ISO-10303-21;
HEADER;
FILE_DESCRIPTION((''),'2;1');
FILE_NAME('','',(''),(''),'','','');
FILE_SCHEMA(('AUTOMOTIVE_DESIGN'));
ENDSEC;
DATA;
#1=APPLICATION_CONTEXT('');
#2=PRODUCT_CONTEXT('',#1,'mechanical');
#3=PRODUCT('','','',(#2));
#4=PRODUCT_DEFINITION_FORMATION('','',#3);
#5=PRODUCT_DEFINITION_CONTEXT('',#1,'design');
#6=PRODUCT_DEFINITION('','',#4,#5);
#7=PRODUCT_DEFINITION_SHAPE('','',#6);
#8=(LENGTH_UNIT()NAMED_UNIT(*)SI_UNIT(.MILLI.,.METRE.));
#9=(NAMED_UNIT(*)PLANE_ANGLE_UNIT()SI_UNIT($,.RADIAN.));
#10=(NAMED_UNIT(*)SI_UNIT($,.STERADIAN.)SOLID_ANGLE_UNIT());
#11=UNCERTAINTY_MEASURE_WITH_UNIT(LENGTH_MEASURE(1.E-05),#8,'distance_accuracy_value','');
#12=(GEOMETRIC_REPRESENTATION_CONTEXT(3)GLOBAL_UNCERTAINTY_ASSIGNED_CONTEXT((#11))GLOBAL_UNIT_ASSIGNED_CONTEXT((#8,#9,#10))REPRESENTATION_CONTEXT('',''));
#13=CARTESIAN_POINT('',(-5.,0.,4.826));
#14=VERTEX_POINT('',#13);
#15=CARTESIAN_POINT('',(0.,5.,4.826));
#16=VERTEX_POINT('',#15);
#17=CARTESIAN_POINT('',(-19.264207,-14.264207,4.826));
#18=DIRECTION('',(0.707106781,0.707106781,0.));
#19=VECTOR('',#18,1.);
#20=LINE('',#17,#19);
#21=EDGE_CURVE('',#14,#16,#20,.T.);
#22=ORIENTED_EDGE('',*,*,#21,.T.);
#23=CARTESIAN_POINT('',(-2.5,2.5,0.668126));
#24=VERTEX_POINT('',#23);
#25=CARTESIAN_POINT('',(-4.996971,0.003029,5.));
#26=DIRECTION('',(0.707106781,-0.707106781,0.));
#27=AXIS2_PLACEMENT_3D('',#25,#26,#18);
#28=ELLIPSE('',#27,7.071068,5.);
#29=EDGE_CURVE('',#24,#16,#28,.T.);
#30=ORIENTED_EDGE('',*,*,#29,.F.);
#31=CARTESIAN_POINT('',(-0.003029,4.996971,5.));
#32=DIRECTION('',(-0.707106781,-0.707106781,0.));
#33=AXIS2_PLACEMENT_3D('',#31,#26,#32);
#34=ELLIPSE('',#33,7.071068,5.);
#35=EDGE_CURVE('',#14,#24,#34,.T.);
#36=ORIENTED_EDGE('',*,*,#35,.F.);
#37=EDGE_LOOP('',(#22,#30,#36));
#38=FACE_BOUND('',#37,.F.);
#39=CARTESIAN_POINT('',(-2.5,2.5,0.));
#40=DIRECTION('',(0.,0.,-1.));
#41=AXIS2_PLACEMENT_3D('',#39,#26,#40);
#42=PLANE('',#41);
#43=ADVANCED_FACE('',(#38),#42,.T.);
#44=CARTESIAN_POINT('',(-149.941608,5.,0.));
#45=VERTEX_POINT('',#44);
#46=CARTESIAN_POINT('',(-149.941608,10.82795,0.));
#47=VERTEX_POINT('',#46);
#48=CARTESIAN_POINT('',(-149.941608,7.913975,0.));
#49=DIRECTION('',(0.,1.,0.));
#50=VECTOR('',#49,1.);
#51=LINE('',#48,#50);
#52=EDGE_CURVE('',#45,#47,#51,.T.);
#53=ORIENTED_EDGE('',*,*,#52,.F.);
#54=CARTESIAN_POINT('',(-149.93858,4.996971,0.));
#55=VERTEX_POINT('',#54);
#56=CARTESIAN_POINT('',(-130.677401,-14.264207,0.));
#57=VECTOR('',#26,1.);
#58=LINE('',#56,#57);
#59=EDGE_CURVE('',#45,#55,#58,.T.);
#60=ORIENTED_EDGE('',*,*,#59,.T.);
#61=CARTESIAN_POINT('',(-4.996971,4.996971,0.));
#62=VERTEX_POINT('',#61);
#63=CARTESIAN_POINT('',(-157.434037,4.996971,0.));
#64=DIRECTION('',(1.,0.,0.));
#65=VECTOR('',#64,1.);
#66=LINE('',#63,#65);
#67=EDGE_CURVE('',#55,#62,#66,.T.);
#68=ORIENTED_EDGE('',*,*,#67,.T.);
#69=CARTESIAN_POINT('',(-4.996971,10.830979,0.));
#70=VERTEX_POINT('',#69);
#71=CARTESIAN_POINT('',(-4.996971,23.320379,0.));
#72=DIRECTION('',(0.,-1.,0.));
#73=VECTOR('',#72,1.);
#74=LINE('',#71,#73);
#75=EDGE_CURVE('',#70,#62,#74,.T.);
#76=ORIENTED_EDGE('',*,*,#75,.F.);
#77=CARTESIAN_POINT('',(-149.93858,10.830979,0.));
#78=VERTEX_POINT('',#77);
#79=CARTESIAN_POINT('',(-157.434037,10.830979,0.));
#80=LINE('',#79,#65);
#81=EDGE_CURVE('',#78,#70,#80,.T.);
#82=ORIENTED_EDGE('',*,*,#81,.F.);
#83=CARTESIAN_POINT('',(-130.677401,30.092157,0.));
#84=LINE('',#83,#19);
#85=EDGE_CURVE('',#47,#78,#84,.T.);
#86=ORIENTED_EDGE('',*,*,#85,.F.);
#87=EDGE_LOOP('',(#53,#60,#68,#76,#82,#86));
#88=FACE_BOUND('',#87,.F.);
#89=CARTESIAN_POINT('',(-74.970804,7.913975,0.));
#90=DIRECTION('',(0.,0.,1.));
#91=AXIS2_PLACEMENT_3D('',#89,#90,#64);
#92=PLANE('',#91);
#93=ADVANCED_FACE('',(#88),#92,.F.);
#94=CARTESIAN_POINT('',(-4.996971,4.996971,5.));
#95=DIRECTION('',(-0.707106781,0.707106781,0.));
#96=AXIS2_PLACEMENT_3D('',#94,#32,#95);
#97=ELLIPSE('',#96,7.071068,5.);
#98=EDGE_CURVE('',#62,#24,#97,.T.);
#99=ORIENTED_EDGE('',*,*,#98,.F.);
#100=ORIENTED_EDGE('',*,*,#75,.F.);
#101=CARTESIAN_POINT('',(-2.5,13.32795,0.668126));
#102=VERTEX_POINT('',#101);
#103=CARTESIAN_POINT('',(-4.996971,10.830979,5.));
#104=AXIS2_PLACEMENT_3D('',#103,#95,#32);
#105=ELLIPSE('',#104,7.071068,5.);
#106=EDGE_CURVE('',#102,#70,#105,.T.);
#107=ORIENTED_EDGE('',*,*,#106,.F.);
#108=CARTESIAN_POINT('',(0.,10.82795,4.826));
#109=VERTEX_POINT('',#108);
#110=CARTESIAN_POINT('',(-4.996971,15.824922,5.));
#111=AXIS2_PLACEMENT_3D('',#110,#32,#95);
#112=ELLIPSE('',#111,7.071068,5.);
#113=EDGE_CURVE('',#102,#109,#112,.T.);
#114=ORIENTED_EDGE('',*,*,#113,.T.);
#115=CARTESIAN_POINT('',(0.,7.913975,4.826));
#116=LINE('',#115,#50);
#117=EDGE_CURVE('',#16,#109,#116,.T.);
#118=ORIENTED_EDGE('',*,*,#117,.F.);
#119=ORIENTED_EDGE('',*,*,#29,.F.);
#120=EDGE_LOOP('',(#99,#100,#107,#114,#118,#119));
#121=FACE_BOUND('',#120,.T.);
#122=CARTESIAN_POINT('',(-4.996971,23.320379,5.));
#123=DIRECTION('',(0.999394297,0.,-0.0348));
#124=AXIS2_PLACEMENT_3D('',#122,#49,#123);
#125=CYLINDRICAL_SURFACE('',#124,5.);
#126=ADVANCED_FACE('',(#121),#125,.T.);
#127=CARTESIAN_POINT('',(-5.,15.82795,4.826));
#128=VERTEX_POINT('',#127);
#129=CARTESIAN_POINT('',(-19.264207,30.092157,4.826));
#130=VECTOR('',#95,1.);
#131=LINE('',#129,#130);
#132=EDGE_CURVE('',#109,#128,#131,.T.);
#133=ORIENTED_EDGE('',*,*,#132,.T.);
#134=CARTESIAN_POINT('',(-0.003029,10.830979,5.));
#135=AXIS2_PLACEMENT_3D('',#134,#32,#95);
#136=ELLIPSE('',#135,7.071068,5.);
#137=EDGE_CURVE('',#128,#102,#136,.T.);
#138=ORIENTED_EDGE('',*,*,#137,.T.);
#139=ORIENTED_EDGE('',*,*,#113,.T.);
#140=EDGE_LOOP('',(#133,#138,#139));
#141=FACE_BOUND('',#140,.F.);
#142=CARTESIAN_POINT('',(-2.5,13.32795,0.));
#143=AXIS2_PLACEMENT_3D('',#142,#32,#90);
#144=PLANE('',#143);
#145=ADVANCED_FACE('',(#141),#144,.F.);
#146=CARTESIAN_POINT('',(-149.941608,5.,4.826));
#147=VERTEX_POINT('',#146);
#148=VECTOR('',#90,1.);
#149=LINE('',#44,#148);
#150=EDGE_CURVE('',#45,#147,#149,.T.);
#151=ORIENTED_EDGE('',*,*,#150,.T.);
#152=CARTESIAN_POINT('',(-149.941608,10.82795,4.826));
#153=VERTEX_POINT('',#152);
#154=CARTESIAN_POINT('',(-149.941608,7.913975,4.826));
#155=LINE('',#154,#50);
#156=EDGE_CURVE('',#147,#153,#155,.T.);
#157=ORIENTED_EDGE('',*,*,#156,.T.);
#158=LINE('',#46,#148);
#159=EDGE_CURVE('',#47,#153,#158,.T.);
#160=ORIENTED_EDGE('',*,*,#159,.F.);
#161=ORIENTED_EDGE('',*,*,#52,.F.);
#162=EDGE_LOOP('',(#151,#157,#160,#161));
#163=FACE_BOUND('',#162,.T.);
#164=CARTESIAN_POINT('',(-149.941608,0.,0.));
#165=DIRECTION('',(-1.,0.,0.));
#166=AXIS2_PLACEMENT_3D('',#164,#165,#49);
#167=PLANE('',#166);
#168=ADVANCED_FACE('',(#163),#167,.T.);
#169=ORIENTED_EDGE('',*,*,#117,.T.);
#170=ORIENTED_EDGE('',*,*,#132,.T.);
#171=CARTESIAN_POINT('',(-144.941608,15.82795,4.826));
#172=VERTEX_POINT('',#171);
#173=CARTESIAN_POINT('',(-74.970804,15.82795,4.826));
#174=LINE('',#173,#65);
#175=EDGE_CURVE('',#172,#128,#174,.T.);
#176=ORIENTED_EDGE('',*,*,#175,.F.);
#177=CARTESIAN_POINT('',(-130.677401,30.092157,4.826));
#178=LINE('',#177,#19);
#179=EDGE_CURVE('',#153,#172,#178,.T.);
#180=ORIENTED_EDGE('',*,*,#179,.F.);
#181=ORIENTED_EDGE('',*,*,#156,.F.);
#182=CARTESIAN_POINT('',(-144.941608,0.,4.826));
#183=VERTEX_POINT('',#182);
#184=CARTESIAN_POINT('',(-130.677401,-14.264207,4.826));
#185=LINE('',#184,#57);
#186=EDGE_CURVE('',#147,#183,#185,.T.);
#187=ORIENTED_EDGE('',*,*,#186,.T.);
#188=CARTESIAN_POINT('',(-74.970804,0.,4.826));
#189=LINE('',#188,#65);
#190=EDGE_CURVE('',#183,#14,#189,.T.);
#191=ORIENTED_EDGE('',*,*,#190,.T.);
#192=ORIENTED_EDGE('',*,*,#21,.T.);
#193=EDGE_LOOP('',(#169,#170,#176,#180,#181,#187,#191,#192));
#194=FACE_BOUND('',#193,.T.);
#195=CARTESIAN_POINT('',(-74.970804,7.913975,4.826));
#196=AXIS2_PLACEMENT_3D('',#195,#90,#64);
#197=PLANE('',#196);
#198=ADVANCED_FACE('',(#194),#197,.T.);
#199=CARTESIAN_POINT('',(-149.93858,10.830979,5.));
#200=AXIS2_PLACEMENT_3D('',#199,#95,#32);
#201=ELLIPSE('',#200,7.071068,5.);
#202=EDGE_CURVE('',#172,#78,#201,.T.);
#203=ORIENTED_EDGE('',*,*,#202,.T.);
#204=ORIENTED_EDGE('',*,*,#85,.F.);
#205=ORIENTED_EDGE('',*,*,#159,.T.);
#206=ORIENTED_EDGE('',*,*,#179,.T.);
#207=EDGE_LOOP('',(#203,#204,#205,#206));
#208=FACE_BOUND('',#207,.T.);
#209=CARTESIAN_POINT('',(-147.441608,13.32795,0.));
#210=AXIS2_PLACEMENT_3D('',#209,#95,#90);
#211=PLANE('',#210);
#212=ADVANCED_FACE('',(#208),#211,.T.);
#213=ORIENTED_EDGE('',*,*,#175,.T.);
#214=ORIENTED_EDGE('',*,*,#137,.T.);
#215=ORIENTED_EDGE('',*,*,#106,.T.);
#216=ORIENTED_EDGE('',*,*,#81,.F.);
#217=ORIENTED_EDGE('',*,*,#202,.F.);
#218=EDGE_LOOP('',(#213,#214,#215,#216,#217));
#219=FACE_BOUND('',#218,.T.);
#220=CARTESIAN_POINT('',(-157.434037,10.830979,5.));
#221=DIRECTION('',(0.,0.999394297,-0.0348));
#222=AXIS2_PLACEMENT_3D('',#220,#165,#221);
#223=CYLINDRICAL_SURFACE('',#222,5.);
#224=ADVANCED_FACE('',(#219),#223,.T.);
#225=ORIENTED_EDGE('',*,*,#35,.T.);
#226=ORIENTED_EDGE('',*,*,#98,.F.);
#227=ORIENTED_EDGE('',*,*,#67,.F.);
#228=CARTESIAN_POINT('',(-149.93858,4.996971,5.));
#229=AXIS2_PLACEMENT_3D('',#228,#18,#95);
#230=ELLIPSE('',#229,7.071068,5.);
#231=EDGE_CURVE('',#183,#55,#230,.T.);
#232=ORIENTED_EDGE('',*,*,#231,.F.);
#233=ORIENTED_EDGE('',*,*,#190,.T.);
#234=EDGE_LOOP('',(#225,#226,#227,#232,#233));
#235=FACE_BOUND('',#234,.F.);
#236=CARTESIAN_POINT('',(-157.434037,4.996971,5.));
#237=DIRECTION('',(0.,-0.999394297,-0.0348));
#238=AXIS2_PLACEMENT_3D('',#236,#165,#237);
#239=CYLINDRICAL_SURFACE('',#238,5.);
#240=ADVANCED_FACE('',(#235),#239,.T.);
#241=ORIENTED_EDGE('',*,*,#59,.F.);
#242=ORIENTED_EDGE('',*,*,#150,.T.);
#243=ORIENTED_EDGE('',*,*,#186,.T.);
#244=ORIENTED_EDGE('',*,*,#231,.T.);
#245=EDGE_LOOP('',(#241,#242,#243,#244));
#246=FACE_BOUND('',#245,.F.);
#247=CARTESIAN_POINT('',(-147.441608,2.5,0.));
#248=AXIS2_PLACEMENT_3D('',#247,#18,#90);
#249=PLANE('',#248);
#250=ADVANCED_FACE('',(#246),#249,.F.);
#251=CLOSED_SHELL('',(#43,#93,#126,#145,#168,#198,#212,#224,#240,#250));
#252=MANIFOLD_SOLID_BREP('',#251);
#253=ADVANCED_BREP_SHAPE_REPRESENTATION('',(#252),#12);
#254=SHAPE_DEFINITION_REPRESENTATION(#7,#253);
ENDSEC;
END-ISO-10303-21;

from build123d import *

# Parameters (mm, degrees)
F0_W        = 149.9416083097
F0_H        = 15.8279500902
F1_DEPTH    = 4.826
F2_SIZE     = 5
F3_T1_DEPTH = 164.9264657238
F4_T1_DEPTH = 164.9264657238
F5_T1_DEPTH = 30.8128075042


# Not quite as in the source:
# - a fillet or chamfer that OpenCascade refuses, or shapes differently, is made with other operations: its cross-section is extruded or revolved along the edge and cut away or added


with BuildPart() as f1:
    # F0 (on Top) → F1 (new body)
    with BuildSketch(Plane.XY):
        with Locations((-74.9708041549, 7.9139750451)):
            Rectangle(F0_W, F0_H)
    extrude(amount=F1_DEPTH)

    # F2
    f2_edges = [f1.edges().sort_by_distance(p)[0] for p in [
        (-149.941608, 15.82795, 2.413),
        (-149.941608, 0, 2.413),
        (0, 15.82795, 2.413),
        (0, 0, 2.413),
    ]]
    chamfer(f2_edges, length=F2_SIZE)

    # F3: fillet of radius 5 on 1 edges, made by hand

    # F3_s2 → F3_t1 (cut)
    with BuildSketch(Plane.YZ.offset(-157.4340370168)):
        with BuildLine():
            ThreePointArc((0, 4.826), (1.5235005962, 1.4034738983), (4.9969714828, 0))
            Line((4.9969714828, 0), (0, 0))
            Line((0, 0), (0, 4.826))
        make_face()
    extrude(amount=F3_T1_DEPTH, mode=Mode.SUBTRACT)

    # F4: fillet of radius 5 on 1 edges, made by hand

    # F4_s2 → F4_t1 (cut)
    with BuildSketch(Plane.YZ.offset(-157.4340370168)):
        with BuildLine():
            ThreePointArc((15.8279500902, 4.826), (14.304449494, 1.4034738983), (10.8309786074, 0))
            Line((10.8309786074, 0), (15.8279500902, 0))
            Line((15.8279500902, 0), (15.8279500902, 4.826))
        make_face()
    extrude(amount=F4_T1_DEPTH, mode=Mode.SUBTRACT)

    # F5: fillet of radius 5 on 1 edges, made by hand

    # F5_s2 → F5_t1 (cut)
    with BuildSketch(Plane.XZ.offset(-23.3203787972)):
        with BuildLine():
            ThreePointArc((0, 4.826), (-1.5235005962, 1.4034738983), (-4.9969714828, 0))
            Line((-4.9969714828, 0), (0, 0))
            Line((0, 0), (0, 4.826))
        make_face()
    extrude(amount=F5_T1_DEPTH, mode=Mode.SUBTRACT)


solid = f1.part
